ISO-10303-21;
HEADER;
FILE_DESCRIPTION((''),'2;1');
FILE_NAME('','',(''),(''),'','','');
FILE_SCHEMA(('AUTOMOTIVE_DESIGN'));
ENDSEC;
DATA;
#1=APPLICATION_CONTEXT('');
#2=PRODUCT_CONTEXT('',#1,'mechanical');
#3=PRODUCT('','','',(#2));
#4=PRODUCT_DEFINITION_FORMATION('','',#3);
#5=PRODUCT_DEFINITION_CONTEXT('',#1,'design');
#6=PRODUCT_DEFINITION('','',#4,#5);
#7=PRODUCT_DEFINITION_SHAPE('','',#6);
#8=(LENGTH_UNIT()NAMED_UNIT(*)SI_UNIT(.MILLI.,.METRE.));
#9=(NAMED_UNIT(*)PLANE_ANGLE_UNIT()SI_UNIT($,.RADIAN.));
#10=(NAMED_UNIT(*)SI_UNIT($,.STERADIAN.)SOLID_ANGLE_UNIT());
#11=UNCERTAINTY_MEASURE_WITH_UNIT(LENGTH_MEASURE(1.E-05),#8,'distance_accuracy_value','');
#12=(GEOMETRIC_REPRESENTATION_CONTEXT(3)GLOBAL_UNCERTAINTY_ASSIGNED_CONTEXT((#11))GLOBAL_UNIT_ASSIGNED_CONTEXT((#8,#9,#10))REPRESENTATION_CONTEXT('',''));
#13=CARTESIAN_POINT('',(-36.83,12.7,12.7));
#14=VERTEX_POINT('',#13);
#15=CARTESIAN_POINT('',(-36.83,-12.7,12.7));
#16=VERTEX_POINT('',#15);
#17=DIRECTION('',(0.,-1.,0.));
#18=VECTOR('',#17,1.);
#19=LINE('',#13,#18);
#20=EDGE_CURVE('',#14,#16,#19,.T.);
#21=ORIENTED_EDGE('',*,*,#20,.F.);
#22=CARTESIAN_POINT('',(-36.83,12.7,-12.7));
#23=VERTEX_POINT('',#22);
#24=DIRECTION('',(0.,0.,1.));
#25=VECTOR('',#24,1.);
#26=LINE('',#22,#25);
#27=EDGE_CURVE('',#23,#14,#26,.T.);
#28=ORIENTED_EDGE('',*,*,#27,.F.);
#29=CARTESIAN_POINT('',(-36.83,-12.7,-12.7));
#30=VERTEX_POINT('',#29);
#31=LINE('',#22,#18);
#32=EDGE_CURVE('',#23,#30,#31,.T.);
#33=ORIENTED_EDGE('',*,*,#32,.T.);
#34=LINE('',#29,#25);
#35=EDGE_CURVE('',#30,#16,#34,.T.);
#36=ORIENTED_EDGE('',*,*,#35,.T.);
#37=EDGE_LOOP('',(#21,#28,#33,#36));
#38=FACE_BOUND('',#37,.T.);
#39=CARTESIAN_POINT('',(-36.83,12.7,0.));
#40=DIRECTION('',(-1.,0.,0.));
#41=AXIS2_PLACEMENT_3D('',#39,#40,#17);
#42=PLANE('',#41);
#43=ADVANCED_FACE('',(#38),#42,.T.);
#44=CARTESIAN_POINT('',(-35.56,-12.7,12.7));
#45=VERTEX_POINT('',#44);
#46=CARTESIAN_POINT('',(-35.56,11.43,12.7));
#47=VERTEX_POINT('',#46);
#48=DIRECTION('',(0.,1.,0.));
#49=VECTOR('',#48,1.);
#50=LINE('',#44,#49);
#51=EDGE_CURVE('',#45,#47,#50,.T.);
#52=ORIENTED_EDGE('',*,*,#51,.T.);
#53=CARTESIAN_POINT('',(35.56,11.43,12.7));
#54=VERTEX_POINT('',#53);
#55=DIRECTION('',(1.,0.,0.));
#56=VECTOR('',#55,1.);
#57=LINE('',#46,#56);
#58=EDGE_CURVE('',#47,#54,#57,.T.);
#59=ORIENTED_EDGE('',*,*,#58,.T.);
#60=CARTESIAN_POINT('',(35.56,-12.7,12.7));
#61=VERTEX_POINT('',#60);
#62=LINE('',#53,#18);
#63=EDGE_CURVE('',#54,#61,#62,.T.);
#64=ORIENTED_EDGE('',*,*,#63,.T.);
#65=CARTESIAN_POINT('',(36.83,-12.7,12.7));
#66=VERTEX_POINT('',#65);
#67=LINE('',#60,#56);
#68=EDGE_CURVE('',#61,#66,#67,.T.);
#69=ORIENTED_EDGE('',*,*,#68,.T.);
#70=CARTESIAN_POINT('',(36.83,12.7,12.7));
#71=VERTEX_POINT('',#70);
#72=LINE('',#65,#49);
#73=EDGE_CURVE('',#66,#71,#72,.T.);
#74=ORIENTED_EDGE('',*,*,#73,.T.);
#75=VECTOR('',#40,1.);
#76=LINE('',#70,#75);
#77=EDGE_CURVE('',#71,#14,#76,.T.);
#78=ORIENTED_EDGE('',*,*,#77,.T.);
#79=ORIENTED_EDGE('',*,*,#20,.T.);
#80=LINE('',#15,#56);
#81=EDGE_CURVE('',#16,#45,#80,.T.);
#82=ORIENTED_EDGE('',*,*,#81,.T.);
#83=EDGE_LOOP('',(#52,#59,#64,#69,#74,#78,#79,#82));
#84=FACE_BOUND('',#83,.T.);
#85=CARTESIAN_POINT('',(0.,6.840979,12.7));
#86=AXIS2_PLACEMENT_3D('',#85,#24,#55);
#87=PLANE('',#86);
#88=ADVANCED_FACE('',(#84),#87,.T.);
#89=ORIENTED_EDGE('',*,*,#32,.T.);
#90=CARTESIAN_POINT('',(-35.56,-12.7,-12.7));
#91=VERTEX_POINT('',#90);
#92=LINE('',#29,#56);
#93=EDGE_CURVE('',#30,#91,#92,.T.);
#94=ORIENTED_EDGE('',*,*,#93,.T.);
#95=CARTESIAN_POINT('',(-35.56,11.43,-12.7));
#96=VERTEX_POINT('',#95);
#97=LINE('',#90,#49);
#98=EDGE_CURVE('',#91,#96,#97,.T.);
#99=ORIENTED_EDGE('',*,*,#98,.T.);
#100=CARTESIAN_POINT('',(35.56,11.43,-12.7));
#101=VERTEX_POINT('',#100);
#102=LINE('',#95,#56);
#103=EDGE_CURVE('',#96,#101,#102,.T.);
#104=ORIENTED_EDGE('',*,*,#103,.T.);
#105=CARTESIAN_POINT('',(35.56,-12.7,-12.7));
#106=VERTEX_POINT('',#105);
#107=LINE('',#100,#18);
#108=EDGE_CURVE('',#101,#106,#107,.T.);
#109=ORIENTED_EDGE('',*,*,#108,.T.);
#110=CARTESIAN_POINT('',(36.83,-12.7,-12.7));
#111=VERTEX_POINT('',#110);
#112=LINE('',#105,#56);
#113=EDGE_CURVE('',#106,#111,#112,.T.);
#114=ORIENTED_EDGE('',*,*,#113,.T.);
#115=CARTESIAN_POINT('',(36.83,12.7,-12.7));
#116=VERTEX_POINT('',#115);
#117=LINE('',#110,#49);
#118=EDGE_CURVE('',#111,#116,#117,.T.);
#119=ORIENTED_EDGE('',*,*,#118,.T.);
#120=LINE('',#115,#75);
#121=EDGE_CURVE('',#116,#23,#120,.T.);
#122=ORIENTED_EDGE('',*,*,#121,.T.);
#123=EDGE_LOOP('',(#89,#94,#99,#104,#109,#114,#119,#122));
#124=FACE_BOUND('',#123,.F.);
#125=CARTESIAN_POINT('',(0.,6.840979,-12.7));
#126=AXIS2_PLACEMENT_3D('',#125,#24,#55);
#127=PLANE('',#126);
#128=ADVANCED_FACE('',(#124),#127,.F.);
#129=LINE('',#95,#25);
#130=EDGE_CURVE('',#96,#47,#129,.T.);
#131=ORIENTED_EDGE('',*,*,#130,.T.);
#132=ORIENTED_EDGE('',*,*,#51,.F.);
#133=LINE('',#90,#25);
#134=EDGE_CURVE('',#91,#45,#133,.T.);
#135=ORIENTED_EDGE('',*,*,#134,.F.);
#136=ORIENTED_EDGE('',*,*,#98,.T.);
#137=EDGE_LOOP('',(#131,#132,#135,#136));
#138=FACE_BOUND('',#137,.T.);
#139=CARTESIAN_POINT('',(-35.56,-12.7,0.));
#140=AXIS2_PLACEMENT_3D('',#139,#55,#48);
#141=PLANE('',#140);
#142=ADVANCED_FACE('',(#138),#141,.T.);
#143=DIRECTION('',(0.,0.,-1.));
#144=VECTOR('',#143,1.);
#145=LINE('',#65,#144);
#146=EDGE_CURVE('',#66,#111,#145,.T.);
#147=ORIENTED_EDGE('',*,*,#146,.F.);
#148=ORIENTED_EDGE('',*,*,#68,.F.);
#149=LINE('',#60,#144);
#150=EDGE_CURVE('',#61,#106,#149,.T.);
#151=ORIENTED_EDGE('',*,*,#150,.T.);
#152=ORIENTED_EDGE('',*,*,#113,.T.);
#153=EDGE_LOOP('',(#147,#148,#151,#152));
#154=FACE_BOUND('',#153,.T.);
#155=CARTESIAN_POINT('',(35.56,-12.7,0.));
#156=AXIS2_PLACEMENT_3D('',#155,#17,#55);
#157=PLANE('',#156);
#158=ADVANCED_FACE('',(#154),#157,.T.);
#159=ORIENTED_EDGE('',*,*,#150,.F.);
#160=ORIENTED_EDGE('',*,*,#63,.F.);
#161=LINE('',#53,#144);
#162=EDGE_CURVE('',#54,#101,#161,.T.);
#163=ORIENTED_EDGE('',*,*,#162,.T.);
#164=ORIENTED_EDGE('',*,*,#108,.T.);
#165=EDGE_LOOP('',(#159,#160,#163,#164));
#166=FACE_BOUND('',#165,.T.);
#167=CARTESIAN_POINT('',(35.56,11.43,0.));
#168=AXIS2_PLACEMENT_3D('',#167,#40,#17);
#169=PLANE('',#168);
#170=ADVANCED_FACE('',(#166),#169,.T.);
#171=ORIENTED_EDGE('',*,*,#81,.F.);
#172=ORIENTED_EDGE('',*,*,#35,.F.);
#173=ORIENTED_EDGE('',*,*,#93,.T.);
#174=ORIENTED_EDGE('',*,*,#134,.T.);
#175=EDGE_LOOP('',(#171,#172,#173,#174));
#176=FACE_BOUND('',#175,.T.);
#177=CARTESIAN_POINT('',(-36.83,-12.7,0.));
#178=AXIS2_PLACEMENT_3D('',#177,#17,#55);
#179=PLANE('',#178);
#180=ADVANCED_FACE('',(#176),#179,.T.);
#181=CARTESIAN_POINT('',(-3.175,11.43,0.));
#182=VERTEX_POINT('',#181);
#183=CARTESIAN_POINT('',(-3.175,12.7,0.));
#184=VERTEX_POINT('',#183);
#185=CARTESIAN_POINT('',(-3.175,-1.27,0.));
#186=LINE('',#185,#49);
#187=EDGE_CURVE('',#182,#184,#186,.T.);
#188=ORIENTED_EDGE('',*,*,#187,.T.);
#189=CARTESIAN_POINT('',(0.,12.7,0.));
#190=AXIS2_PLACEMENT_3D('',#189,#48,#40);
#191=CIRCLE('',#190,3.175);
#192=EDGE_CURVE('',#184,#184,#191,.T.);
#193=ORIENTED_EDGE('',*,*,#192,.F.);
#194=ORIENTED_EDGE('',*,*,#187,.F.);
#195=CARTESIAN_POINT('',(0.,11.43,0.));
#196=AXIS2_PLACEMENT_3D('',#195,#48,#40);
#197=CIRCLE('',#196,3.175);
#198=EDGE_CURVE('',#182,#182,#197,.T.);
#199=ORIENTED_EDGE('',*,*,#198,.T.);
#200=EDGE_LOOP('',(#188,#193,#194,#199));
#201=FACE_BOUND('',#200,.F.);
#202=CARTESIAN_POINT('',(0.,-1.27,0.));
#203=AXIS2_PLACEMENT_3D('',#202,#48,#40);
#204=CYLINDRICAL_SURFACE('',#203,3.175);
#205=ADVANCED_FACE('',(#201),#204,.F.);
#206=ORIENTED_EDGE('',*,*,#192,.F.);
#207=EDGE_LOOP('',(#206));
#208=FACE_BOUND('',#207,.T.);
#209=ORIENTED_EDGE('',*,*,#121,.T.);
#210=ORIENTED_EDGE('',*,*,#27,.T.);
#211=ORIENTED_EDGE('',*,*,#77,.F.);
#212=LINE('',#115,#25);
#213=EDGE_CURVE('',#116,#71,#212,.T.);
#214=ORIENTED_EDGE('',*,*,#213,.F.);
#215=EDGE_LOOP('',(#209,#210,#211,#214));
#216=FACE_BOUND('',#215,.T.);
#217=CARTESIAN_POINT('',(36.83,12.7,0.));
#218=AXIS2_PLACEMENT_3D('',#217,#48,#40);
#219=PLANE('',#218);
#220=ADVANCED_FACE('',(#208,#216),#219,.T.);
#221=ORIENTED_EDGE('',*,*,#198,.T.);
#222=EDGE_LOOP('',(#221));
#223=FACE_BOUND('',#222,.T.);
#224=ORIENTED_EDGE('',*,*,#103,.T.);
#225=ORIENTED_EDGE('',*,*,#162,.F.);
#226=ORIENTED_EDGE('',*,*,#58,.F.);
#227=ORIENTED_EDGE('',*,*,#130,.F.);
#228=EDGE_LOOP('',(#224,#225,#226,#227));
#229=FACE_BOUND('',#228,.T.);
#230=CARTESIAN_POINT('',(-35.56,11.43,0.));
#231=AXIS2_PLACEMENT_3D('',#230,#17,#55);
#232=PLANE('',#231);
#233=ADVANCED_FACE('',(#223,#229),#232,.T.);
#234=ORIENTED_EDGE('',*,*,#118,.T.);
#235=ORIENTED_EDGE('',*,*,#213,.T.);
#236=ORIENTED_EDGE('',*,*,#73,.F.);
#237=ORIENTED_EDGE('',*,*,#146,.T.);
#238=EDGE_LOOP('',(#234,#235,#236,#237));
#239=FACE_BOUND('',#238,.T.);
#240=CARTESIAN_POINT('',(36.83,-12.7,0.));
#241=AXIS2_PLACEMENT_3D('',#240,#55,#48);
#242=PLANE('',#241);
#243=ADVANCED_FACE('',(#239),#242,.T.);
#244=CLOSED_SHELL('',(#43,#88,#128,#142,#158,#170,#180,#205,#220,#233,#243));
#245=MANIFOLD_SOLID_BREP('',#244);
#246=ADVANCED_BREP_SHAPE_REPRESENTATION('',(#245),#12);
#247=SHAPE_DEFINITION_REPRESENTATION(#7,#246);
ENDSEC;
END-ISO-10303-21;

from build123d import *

# Parameters (mm, degrees)
F1_DEPTH = 12.7
F3_D     = 6.35
F3_DEPTH = 12.7
F3_TIP   = 1.9077324654


# Not quite as in the source:
# - a feature names something its author has since deleted; it is built from what else it names


with BuildPart() as f1:
    # F0 (on Top) → F1 (new body, symmetric)
    with BuildSketch(Plane.XY):
        Polygon((36.83, -12.7), (36.83, 12.7), (-36.83, 12.7), (-36.83, -12.7), (-35.56, -12.7), (-35.56, 11.43), (35.56, 11.43), (35.56, -12.7), align=None)
    extrude(amount=F1_DEPTH, both=True)

    # F3
    with Locations(Plane.XZ.offset(-11.43)):
        with Locations((0, 0)):
            Hole(F3_D / 2, depth=F3_DEPTH)
            with Locations((0, 0, -(F3_DEPTH + F3_TIP / 2))):  # 118° drill point
                Cone(0, F3_D / 2, F3_TIP, mode=Mode.SUBTRACT)


solid = f1.part
